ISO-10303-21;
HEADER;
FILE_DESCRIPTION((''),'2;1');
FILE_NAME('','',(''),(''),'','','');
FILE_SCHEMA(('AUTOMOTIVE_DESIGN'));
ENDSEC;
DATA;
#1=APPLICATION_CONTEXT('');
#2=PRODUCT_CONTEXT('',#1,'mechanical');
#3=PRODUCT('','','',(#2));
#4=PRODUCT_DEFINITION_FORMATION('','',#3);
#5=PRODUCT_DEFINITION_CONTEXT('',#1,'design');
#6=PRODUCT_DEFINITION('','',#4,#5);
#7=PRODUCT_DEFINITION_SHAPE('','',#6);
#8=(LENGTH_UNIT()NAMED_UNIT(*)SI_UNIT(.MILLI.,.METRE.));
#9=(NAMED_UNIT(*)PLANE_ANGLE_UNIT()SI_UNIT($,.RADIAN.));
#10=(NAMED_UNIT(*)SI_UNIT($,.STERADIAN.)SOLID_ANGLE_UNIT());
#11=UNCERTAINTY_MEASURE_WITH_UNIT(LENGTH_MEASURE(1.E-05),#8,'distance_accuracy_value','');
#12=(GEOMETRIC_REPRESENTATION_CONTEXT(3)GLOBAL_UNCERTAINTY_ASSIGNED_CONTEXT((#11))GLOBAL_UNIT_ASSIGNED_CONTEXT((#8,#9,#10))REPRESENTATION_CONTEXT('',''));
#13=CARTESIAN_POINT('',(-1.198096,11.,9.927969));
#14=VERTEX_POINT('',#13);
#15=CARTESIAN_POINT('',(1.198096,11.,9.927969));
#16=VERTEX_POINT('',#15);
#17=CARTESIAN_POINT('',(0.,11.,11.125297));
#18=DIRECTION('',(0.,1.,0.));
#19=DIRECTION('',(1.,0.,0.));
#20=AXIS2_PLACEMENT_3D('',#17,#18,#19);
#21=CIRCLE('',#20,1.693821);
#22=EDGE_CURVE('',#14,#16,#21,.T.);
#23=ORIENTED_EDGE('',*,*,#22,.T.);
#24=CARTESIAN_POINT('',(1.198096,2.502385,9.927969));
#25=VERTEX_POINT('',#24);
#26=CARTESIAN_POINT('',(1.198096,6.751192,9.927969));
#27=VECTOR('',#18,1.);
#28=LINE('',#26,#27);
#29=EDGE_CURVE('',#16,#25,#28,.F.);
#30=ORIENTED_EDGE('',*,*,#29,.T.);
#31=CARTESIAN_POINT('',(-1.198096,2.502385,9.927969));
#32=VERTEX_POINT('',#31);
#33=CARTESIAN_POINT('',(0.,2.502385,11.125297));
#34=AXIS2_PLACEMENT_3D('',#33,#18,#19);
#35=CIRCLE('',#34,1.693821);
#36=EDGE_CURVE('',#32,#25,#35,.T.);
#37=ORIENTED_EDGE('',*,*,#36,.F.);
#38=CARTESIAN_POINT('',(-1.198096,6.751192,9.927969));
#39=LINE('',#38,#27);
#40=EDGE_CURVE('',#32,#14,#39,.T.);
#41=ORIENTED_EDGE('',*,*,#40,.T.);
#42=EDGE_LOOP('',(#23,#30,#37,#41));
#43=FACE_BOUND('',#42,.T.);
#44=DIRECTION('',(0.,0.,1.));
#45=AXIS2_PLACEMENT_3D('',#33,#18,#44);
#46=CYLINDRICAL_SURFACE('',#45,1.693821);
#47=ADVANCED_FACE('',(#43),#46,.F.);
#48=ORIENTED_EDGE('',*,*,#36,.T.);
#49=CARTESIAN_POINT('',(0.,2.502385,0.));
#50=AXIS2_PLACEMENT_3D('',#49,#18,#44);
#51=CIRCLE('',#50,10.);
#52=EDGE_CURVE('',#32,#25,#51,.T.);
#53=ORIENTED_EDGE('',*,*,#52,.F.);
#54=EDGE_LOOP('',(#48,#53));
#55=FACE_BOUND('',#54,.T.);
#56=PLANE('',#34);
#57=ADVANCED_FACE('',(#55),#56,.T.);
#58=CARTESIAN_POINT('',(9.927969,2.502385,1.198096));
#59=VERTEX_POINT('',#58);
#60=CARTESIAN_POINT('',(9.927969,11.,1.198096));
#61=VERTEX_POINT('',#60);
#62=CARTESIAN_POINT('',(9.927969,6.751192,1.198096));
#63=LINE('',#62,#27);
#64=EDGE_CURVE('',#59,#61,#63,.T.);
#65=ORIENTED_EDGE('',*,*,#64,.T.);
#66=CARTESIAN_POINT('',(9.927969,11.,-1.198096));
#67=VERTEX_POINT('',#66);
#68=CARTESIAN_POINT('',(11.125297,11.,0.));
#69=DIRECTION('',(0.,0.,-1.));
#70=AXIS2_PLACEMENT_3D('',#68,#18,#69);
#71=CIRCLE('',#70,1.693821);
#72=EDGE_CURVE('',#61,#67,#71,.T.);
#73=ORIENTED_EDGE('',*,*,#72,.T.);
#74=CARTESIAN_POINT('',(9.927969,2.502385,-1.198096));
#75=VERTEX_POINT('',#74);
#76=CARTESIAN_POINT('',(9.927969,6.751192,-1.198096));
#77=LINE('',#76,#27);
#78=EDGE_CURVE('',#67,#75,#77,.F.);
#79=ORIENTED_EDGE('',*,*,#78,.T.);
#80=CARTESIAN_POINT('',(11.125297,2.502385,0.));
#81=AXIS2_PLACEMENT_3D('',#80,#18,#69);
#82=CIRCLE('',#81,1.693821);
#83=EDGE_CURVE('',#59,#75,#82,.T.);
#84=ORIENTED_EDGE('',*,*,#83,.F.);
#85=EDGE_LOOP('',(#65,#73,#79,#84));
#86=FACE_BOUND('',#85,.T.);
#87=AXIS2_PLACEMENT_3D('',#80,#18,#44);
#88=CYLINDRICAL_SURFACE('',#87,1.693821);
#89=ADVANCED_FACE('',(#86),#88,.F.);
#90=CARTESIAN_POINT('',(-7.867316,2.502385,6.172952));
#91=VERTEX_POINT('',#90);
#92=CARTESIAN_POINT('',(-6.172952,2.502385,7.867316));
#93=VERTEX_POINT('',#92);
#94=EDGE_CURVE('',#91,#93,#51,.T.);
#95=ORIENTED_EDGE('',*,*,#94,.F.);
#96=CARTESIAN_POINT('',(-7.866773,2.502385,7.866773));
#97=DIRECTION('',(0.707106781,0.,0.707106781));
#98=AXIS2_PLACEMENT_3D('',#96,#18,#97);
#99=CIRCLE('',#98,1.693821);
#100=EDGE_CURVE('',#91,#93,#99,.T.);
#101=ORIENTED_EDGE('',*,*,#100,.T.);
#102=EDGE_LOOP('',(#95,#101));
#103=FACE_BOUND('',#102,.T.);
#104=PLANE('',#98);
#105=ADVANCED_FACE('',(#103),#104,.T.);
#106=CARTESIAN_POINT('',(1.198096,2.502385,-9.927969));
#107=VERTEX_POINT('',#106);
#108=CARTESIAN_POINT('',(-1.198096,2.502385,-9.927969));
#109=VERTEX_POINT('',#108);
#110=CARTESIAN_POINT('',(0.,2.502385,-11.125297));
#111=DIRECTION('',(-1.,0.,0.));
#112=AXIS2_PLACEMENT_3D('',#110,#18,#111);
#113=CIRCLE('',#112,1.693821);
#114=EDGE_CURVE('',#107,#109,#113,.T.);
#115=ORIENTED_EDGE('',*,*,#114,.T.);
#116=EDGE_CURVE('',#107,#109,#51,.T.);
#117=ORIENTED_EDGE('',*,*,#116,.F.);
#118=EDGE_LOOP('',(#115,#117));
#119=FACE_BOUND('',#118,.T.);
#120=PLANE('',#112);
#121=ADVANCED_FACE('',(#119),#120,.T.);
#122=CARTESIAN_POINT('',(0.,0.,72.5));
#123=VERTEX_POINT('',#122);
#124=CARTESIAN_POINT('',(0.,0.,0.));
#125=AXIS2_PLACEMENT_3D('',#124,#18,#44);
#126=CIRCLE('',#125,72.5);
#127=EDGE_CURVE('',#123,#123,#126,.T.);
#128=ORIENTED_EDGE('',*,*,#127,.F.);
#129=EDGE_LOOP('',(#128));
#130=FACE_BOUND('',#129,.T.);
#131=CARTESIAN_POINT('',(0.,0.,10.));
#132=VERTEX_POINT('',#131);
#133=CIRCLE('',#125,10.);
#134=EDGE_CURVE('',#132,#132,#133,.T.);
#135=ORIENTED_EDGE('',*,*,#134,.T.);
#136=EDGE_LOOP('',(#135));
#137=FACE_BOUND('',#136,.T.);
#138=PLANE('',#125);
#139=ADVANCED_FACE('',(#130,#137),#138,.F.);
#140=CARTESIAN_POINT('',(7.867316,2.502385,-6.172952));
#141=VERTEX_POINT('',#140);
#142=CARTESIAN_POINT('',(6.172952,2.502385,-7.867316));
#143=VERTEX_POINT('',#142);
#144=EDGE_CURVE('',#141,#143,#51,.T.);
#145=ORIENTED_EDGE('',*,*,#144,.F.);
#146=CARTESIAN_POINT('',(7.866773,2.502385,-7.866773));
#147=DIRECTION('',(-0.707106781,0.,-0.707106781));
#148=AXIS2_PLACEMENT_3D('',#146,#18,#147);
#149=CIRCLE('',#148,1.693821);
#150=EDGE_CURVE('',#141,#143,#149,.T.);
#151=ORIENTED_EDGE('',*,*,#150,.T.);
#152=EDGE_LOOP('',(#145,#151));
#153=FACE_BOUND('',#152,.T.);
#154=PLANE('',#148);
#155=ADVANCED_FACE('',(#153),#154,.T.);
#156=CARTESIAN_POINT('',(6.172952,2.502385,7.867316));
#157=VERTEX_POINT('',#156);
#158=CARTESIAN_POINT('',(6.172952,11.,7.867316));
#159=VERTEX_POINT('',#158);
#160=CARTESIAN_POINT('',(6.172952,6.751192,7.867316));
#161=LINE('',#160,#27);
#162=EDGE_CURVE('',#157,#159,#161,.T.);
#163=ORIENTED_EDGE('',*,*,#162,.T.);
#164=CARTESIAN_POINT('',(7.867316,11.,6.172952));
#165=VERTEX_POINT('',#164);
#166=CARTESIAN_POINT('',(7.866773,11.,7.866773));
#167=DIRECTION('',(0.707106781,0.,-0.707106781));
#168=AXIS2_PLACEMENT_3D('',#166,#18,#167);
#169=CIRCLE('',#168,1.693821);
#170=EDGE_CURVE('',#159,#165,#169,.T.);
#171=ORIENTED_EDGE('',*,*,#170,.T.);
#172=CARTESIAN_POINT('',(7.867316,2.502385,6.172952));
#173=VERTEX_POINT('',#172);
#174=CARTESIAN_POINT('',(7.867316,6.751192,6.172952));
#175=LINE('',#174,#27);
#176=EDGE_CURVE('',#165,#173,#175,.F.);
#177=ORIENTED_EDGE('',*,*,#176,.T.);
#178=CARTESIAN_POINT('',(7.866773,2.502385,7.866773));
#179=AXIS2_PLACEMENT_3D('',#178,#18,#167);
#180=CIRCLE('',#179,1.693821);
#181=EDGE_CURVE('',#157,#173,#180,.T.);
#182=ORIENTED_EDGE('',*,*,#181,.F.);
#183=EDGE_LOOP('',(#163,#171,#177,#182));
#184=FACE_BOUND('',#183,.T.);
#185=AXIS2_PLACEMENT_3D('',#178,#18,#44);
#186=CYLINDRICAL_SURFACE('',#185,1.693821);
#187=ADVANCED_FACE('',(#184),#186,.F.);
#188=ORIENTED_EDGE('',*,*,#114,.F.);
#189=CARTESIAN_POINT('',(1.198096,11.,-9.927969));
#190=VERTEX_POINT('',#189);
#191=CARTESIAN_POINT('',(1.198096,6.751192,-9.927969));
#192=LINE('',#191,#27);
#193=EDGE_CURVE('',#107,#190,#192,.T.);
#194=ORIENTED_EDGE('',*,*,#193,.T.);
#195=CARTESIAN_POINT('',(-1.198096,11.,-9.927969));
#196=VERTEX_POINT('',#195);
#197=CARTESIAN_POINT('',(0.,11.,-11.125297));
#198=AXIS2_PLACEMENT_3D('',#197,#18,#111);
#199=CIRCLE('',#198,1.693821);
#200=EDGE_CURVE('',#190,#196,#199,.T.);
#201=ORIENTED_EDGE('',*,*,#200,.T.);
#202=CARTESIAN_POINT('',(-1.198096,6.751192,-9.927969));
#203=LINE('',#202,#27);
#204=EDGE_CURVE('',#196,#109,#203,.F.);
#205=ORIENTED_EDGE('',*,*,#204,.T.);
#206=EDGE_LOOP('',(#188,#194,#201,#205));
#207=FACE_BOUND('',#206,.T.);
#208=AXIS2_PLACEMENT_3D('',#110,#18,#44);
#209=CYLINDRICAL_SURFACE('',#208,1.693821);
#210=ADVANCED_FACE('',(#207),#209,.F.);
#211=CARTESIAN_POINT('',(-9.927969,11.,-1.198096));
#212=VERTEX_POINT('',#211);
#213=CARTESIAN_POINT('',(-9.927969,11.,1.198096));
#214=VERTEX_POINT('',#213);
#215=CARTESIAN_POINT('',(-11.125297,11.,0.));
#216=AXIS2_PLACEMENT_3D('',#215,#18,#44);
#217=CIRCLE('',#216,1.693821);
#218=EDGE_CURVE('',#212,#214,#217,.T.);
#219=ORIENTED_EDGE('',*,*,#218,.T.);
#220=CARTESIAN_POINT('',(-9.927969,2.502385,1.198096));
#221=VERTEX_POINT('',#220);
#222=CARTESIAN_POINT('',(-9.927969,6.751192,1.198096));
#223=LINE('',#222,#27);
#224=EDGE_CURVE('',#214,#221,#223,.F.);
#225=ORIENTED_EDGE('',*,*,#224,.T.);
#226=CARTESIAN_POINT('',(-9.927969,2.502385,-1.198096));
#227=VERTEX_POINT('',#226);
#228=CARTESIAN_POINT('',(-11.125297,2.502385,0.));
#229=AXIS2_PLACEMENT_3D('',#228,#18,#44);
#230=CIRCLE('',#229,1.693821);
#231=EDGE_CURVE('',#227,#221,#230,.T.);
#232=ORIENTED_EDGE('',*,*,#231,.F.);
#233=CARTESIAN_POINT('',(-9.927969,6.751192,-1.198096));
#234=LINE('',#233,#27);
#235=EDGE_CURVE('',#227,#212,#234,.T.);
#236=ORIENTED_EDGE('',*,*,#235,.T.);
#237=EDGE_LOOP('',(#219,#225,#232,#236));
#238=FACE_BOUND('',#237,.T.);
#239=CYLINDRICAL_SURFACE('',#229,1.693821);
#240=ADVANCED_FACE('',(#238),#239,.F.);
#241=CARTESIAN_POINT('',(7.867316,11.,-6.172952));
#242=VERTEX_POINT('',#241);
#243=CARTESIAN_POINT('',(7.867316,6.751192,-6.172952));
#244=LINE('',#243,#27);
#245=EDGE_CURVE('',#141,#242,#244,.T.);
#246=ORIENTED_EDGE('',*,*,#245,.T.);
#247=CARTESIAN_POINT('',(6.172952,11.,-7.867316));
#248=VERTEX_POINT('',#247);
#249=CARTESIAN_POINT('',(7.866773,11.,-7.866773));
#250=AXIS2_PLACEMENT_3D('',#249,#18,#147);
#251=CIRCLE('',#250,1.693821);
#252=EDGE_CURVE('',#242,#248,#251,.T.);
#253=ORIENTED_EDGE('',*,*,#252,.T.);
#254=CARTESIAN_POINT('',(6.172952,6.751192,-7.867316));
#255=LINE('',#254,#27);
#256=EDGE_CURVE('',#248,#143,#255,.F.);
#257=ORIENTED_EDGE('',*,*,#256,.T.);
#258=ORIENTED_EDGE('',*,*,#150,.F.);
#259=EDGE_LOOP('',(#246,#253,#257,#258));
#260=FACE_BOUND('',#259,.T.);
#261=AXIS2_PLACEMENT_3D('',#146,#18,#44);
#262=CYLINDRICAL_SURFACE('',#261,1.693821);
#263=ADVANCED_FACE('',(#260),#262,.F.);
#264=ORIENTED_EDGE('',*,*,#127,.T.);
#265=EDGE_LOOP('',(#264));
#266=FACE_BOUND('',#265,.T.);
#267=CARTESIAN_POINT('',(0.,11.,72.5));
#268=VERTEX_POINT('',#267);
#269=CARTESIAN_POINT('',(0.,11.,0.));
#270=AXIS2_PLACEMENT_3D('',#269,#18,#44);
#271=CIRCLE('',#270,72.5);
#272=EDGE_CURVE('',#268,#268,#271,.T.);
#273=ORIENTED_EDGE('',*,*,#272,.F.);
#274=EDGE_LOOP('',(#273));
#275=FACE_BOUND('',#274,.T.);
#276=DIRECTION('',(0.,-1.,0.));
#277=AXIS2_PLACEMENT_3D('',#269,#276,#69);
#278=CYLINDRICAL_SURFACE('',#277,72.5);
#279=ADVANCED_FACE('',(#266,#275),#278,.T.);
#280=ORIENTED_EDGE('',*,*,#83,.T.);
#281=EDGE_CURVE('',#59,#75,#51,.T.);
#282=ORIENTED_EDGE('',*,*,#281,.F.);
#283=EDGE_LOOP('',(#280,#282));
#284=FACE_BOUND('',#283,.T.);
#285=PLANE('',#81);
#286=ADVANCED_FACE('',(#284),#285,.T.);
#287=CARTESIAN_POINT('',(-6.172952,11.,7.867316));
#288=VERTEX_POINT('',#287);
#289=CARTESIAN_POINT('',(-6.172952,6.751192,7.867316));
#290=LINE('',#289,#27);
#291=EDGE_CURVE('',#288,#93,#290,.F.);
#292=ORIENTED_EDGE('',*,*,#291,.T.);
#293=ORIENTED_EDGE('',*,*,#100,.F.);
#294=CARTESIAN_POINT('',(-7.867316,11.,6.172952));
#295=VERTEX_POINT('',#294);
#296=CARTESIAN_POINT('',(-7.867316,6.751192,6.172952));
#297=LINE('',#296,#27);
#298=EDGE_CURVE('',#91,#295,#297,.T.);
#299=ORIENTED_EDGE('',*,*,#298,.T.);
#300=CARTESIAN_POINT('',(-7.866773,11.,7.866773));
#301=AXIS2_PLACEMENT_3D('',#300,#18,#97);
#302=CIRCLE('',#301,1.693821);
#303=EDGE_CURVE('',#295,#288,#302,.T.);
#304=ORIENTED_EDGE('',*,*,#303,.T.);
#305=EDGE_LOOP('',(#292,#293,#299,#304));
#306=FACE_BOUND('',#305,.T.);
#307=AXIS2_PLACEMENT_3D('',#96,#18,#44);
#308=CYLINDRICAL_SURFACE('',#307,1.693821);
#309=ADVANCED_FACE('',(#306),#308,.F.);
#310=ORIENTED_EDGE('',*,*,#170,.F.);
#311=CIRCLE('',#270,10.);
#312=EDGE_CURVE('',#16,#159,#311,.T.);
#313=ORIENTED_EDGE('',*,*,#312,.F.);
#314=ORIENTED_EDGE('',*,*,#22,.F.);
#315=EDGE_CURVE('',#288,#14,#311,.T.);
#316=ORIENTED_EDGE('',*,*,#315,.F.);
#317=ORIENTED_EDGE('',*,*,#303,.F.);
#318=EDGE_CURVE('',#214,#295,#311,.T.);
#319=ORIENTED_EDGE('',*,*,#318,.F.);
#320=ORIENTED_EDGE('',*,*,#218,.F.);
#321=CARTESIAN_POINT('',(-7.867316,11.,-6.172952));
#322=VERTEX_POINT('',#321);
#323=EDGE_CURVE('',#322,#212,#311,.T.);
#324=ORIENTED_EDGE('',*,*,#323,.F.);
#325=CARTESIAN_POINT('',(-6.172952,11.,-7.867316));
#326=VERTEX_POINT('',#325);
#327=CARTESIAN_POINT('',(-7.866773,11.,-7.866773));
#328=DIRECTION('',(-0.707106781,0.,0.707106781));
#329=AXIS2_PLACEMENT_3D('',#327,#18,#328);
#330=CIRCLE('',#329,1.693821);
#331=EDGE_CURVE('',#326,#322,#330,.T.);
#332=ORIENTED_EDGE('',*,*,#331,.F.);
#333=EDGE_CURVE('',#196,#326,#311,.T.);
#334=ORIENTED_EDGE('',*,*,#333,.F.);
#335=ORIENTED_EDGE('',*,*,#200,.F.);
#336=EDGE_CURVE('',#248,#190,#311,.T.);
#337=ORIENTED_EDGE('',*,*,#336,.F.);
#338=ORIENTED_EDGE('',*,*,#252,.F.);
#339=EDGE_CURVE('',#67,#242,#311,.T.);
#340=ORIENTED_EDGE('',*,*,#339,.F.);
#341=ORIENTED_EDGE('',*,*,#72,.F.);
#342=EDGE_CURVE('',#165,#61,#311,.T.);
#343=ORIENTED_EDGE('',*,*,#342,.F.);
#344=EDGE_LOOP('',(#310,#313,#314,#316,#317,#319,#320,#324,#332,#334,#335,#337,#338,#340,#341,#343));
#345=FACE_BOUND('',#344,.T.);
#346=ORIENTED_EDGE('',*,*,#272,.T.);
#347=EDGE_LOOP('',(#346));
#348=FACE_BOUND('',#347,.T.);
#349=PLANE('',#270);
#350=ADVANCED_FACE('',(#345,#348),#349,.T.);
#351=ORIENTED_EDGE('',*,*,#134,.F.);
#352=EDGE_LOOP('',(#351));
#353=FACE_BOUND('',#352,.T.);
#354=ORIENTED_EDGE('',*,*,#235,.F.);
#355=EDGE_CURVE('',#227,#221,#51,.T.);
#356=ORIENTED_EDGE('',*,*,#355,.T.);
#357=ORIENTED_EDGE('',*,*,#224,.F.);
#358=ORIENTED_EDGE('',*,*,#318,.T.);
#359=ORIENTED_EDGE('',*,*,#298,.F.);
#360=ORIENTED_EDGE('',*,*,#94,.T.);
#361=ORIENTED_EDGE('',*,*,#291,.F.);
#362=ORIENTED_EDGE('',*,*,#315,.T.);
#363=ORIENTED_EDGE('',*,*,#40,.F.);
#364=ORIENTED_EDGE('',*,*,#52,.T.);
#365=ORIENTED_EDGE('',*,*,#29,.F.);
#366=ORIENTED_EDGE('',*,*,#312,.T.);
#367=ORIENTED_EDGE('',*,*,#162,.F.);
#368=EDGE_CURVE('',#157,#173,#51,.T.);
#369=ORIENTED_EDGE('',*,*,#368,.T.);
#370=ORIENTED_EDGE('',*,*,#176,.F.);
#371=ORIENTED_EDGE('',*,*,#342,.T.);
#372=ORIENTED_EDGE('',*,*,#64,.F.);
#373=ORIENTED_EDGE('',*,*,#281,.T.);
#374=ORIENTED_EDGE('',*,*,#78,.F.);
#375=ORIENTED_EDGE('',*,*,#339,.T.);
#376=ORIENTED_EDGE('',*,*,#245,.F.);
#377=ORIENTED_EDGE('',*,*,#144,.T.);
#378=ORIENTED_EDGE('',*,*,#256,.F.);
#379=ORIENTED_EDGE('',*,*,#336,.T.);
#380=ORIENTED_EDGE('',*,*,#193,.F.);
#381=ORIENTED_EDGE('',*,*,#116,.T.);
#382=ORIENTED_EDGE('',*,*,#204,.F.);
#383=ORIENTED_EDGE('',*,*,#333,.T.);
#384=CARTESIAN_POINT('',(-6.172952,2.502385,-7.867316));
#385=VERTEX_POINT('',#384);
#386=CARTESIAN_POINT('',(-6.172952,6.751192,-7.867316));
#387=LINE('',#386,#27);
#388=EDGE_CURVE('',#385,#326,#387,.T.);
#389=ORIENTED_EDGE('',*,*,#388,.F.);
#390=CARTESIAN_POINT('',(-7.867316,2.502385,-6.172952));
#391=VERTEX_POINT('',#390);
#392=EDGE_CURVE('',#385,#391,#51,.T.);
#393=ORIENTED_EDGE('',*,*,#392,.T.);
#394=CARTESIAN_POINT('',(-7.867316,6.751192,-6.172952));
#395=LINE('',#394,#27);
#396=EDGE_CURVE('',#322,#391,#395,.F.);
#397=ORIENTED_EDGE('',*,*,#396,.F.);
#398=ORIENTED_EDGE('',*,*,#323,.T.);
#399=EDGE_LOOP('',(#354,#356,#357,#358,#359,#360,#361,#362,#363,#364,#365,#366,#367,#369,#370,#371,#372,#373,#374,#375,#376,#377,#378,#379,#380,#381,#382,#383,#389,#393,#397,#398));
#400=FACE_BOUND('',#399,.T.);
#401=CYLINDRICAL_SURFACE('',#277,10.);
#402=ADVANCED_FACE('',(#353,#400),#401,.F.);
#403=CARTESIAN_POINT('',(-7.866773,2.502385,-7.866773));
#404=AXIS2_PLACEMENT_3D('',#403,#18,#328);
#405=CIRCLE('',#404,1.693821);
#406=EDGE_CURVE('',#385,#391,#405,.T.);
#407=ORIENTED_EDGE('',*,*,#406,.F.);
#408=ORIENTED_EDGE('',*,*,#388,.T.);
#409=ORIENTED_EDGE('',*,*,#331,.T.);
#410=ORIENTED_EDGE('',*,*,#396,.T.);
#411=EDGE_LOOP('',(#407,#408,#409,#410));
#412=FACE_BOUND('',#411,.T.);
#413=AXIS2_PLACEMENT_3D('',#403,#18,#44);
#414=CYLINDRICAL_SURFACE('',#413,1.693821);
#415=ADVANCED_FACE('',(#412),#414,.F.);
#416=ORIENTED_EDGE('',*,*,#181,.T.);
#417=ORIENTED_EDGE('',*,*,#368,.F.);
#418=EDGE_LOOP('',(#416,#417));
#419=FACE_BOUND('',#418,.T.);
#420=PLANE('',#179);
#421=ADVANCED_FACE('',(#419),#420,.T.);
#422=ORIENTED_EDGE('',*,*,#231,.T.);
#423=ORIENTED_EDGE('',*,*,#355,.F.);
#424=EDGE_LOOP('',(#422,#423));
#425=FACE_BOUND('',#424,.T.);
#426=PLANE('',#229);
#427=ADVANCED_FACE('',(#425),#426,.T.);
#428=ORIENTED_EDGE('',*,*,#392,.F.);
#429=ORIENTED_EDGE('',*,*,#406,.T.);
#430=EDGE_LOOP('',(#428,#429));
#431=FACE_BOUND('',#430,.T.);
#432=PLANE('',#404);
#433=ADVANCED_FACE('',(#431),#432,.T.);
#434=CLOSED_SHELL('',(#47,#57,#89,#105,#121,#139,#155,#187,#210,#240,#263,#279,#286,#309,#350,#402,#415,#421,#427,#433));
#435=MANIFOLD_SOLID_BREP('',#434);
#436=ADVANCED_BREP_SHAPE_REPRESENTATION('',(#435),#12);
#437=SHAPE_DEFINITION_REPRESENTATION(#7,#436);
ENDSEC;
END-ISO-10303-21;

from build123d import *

# Parameters (mm, degrees)
SKETCH1_R           = 72.5
BOSS_EXTRUDE1_DEPTH = 11
SKETCH2_R           = 10
CUT_EXTRUDE1_DEPTH  = 104.118863454
SKETCH3_R           = 1.693821091
CUT_EXTRUDE2_DEPTH  = 8.497615315
CIRPATTERN1_COUNT   = 8


with BuildPart() as part:
    # Sketch1 → Boss-Extrude1 (new body)
    with BuildSketch(Plane(origin=(0, 0, 0), x_dir=(1, 0, 0), z_dir=(0, 1, 0))):
        Circle(SKETCH1_R)
    extrude(amount=BOSS_EXTRUDE1_DEPTH)

    # Sketch2 → Cut-Extrude1 (cut, through all)
    with BuildSketch(Plane(origin=(0, 0, 0), x_dir=(1, 0, 0), z_dir=(0, 1, 0))):
        Circle(SKETCH2_R)
    extrude(amount=CUT_EXTRUDE1_DEPTH, mode=Mode.SUBTRACT)

    # Sketch3 → Cut-Extrude2 (cut)
    with BuildSketch(Plane(origin=(0, 11, 0), x_dir=(1, 0, 0), z_dir=(0, 1, 0))):
        with Locations((-11.12529717, 0)):
            Circle(SKETCH3_R)
    cut_extrude2 = extrude(amount=-CUT_EXTRUDE2_DEPTH, mode=Mode.SUBTRACT)

    # CirPattern1: Cut-Extrude2 ×8 about axis
    cirpattern1_axis = Axis((0, 0, 0), (0, 1, 0))
    for i in range(1, CIRPATTERN1_COUNT):
        add(cut_extrude2.rotate(cirpattern1_axis, i * 360 / CIRPATTERN1_COUNT), mode=Mode.SUBTRACT)


solid = part.part
